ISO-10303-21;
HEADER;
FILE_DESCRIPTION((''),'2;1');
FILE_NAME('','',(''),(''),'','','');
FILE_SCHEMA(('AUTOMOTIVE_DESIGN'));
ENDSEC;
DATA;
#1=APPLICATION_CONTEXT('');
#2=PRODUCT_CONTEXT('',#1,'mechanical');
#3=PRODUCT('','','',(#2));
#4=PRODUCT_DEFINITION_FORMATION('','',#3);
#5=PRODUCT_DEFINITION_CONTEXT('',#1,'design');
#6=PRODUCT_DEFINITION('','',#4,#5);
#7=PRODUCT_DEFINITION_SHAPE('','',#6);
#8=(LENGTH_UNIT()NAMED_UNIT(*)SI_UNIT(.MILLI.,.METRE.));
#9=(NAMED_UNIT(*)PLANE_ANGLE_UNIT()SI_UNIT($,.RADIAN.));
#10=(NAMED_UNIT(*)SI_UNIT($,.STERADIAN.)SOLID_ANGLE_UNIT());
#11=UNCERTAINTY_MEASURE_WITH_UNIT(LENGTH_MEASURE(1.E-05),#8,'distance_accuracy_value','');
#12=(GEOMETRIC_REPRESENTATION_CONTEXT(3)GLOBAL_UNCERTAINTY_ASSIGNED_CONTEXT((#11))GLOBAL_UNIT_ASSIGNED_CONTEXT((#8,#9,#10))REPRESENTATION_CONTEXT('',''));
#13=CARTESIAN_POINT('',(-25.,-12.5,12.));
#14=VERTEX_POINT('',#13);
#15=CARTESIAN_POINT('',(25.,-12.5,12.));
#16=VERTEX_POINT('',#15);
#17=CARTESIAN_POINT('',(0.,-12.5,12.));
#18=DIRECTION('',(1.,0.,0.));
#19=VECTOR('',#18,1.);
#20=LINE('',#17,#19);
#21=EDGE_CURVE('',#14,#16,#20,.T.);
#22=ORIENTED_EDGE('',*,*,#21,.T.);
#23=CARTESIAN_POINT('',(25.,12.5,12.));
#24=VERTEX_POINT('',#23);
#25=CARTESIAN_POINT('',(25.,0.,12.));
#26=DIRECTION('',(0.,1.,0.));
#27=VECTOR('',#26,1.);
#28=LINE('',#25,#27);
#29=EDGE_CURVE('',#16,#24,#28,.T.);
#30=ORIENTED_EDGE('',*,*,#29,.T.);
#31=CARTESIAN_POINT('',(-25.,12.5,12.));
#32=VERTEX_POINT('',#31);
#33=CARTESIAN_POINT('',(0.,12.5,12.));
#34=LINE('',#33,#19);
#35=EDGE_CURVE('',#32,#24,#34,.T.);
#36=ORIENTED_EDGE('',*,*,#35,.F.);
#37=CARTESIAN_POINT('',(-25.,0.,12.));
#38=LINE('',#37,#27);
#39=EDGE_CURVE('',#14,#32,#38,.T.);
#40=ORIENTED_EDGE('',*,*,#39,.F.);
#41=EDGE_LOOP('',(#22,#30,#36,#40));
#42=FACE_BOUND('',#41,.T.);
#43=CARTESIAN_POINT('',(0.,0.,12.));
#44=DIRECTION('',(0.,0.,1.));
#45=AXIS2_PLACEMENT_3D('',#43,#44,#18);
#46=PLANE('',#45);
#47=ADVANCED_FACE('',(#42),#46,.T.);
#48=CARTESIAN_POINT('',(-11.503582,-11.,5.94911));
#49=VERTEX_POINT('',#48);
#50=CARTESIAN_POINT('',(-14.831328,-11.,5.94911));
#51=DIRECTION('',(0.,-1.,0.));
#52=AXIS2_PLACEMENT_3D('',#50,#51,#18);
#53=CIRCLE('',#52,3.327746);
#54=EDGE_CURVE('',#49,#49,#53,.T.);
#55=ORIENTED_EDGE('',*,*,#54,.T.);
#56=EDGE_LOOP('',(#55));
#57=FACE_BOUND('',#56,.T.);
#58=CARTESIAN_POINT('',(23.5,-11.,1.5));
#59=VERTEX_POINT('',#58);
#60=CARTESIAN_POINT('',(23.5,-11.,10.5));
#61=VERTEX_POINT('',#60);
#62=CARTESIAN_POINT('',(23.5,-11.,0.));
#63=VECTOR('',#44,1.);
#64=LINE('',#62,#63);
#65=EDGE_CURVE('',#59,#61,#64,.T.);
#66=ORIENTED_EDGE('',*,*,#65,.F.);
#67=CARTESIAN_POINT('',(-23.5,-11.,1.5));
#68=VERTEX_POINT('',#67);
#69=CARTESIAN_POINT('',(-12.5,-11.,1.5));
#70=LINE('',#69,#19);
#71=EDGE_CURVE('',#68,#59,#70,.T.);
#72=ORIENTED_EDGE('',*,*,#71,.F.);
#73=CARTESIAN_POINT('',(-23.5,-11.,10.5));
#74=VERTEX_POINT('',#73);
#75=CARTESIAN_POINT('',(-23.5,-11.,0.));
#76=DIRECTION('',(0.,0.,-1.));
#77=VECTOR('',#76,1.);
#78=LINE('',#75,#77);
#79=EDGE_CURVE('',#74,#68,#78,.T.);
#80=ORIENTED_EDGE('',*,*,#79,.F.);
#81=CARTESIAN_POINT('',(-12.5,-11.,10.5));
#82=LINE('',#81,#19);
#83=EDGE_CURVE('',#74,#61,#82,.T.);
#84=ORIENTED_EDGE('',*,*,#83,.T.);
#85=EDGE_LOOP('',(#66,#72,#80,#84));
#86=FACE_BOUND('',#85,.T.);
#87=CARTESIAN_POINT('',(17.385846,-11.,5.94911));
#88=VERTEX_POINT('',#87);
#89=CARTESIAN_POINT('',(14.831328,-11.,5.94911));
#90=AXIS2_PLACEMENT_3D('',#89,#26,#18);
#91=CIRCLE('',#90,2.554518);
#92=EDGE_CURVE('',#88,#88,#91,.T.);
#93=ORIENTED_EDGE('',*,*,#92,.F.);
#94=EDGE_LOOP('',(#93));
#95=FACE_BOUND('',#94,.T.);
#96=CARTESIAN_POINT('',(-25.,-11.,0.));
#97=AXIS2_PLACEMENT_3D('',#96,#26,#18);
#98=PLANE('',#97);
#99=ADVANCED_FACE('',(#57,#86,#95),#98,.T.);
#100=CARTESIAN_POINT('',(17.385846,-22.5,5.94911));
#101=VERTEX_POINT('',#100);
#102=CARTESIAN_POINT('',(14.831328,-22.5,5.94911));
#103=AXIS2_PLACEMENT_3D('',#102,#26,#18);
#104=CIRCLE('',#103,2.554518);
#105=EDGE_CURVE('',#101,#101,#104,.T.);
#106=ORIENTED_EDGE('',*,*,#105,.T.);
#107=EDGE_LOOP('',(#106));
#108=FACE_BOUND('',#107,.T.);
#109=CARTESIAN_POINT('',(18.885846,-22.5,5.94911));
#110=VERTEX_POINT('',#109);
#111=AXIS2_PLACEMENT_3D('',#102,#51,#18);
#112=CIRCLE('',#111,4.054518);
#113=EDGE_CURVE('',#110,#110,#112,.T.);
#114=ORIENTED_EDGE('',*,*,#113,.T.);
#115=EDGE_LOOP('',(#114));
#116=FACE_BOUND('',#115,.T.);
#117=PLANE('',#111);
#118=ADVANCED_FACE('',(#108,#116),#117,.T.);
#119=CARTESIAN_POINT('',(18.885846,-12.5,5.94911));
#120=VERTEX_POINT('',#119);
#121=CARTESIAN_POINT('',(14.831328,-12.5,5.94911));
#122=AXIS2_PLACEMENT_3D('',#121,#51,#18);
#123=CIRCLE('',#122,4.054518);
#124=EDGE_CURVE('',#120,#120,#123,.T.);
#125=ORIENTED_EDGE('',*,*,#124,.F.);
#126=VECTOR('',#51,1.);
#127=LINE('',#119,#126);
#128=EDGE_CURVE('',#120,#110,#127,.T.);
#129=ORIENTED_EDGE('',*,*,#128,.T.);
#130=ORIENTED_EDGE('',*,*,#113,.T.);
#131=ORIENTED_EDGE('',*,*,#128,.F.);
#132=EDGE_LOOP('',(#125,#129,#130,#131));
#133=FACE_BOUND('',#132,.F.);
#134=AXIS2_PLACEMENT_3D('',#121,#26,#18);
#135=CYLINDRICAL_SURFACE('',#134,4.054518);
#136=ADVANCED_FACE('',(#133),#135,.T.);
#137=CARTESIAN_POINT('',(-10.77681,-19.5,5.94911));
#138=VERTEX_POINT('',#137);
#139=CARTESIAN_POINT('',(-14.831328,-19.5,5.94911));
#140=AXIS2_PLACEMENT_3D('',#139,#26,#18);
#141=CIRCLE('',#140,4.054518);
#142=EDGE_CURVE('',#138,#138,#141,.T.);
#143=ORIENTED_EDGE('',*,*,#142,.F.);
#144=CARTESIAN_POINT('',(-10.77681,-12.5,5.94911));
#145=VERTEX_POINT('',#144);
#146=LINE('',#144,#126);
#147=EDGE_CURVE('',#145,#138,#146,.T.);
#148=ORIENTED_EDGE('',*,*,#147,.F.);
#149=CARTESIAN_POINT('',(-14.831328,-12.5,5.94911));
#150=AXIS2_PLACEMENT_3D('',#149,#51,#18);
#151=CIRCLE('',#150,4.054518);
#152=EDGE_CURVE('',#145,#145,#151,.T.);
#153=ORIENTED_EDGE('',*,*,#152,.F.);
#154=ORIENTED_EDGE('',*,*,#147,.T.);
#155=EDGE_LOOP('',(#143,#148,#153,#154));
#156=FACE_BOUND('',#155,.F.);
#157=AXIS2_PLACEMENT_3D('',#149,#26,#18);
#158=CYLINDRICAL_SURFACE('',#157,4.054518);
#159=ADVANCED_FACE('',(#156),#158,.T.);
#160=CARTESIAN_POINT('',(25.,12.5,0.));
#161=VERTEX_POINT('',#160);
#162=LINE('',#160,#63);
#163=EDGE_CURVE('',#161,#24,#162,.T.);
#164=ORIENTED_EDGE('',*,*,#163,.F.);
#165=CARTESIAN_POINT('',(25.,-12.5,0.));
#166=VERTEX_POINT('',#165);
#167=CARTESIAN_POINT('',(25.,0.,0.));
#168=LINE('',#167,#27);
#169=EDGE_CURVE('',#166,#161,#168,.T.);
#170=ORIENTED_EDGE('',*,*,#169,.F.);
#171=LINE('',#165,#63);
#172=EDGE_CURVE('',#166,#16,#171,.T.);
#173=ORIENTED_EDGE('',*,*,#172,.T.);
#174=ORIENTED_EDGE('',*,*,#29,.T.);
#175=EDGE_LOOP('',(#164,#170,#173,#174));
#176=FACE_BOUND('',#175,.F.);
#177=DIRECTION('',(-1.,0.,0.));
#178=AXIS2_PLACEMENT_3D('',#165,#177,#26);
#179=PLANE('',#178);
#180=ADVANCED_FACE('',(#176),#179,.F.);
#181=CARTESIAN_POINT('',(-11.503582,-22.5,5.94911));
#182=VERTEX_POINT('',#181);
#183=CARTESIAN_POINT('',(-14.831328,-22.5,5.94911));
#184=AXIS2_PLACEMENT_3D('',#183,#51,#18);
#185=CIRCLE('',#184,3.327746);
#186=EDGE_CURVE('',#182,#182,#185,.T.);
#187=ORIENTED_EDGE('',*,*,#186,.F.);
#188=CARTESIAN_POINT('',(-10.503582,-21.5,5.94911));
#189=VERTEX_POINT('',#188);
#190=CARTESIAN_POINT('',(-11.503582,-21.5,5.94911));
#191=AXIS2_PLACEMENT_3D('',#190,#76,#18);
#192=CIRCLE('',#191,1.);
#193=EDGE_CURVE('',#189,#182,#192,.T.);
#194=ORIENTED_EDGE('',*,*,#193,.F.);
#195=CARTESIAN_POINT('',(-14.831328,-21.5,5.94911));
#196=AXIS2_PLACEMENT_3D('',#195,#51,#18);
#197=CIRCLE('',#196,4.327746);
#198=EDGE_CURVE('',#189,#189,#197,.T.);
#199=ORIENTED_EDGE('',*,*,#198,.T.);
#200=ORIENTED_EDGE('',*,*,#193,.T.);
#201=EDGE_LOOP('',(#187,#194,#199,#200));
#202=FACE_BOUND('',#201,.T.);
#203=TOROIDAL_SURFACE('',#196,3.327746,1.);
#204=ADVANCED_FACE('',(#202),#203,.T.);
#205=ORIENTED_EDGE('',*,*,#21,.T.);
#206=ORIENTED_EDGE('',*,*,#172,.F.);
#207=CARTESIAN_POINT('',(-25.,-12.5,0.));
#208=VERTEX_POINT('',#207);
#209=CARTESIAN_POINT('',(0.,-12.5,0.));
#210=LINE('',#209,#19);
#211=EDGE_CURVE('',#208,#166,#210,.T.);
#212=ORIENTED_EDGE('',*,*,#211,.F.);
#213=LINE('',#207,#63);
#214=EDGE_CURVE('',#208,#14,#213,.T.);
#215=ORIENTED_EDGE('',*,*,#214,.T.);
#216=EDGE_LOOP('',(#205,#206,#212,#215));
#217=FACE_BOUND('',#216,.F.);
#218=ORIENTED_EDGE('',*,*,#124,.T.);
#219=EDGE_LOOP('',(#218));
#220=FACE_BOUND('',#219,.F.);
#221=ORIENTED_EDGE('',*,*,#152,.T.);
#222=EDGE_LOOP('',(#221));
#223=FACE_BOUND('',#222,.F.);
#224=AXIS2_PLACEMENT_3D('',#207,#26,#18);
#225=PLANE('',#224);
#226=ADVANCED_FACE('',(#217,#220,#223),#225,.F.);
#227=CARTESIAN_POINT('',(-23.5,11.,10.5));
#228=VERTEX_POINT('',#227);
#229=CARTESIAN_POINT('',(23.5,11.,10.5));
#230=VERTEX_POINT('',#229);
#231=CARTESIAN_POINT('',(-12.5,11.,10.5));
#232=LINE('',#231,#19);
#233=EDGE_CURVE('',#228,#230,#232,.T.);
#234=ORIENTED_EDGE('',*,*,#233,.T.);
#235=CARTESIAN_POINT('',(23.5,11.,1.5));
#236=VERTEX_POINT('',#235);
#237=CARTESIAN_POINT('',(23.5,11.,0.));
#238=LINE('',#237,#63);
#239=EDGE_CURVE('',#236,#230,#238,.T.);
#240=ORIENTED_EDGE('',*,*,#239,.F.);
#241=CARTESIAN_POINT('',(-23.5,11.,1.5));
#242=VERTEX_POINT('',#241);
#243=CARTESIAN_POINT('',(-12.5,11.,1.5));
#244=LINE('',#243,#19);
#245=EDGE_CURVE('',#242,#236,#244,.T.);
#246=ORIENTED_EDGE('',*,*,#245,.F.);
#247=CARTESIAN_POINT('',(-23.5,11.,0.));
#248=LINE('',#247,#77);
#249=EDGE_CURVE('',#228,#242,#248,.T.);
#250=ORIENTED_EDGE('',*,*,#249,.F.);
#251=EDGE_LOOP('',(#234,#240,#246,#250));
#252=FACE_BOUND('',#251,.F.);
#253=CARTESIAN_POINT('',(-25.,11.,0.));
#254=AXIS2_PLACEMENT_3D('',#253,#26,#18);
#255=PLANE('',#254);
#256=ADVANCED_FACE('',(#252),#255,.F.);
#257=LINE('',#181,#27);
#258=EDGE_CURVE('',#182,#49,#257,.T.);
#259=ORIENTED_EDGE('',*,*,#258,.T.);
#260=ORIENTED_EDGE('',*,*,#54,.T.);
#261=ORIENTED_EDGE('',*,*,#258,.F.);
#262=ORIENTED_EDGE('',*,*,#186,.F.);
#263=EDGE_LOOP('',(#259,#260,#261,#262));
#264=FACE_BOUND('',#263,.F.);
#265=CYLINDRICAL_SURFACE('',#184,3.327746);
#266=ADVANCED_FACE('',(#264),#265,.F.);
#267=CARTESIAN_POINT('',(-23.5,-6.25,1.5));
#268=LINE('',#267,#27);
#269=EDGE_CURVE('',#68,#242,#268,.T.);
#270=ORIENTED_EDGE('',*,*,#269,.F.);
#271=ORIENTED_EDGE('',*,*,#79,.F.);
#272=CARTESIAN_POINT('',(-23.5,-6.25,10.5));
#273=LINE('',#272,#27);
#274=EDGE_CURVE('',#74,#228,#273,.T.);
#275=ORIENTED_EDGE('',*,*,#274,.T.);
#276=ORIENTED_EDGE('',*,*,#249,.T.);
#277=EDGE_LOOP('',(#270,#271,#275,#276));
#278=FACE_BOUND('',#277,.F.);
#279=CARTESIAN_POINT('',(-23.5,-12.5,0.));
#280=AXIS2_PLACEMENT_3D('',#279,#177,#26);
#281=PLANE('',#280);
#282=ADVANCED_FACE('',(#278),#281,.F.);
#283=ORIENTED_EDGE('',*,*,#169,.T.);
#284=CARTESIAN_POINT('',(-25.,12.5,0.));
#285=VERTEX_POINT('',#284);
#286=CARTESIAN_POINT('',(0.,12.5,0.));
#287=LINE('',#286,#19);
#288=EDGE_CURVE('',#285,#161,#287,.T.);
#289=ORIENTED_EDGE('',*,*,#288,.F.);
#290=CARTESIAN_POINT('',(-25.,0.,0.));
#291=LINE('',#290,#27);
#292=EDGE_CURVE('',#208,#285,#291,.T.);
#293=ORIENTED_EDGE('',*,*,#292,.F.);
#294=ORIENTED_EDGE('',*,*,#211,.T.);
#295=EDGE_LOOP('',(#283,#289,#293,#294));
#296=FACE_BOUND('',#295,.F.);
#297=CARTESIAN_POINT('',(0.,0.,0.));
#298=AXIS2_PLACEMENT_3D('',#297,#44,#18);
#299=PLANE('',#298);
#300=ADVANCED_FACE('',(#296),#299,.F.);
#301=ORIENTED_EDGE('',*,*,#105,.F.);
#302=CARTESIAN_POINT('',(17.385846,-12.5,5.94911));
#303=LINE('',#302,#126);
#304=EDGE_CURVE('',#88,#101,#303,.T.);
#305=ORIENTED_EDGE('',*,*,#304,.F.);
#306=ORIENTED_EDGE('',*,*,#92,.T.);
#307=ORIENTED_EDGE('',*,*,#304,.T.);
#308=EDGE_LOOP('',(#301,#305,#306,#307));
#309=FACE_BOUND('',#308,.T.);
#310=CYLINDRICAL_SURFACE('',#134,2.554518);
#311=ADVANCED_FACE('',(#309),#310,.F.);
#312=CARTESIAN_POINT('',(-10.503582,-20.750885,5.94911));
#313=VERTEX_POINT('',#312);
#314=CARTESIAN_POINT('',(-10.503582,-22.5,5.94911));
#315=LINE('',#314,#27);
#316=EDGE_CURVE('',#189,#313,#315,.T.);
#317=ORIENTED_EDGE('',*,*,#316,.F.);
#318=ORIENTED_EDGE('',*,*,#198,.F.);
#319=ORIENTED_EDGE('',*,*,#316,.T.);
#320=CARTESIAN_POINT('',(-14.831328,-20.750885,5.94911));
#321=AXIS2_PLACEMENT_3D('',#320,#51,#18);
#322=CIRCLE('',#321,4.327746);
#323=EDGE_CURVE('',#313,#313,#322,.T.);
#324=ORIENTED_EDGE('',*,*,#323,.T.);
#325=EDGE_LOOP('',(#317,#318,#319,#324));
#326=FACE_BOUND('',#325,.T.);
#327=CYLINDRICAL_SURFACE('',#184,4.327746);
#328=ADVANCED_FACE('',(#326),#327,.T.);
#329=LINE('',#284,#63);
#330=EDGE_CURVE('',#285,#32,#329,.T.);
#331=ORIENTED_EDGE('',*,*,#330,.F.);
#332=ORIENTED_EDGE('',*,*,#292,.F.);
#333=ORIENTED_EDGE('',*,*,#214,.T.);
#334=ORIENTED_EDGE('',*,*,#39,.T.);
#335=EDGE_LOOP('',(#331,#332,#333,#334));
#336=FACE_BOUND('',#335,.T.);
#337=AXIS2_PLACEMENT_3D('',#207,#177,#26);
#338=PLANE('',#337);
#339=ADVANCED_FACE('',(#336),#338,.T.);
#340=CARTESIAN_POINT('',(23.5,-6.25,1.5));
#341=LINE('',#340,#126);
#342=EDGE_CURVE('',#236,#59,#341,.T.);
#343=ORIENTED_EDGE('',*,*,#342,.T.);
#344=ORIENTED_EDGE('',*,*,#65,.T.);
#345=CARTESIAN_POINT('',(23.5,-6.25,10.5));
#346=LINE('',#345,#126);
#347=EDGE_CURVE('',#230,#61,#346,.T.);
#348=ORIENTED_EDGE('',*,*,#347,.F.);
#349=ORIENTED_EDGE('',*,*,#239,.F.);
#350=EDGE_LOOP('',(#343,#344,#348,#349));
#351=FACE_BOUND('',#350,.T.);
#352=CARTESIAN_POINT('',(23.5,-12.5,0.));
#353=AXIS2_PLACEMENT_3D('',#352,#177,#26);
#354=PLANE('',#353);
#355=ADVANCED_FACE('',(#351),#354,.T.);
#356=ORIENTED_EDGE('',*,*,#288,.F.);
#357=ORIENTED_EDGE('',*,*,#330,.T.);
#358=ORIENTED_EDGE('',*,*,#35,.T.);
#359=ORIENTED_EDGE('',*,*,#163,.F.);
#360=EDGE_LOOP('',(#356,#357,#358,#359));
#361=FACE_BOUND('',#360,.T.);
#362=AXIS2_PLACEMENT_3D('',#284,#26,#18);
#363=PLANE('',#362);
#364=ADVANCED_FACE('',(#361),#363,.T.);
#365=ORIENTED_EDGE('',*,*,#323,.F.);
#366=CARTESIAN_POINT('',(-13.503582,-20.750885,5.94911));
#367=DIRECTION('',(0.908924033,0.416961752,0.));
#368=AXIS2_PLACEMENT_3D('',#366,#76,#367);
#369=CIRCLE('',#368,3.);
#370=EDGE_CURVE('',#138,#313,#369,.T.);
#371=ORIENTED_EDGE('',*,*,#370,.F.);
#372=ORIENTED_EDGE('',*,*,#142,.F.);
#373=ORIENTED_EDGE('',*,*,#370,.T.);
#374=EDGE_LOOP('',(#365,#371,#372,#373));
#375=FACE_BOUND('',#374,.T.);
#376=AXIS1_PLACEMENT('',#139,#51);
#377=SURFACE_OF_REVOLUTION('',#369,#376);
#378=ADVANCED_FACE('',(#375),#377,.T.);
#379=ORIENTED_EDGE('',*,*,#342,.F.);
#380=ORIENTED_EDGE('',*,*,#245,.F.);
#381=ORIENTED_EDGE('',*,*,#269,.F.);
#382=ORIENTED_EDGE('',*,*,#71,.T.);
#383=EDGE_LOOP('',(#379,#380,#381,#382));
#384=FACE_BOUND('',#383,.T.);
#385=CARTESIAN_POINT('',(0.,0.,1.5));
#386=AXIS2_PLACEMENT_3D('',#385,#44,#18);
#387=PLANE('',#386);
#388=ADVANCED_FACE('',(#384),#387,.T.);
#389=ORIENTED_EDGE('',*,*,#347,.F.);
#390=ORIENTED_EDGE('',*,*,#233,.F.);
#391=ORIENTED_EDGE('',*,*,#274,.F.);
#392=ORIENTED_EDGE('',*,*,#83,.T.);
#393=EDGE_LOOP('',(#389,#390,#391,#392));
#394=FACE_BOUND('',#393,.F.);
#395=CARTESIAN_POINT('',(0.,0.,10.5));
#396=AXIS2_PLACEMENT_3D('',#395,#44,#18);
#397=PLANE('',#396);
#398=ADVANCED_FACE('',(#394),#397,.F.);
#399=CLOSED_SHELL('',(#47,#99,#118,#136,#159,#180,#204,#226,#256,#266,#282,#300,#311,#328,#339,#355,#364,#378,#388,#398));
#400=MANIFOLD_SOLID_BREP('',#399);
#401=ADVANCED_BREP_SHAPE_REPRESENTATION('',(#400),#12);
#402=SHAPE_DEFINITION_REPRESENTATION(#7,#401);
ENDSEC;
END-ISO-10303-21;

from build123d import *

# Parameters (mm, degrees)
F0_W     = 50
F0_H     = 25
F1_DEPTH = 12
F2_R     = 4.0545181675
F3_DEPTH = 10
F4_T     = -1.5
F5_R     = 4.327746069
F6_DEPTH = 3
F8_R     = 1
F9_DEPTH = 20


# Not quite as in the source:
# - a fillet or chamfer that OpenCascade refuses, or shapes differently, is made with other operations: its cross-section is extruded or revolved along the edge and cut away or added


with BuildPart() as f1:
    # F0 (on Top) → F1 (new body)
    with BuildSketch(Plane.XY):
        Rectangle(F0_W, F0_H)
    extrude(amount=F1_DEPTH)

    # F2 (on face) → F3 (join)
    with BuildSketch(Plane.XZ.offset(12.5)):
        with Locations((-14.8313278332, 5.9491097927)):
            Circle(F2_R)
        with Locations((14.8313278332, 5.9491097927)):
            Circle(F2_R)
    extrude(amount=F3_DEPTH)

    # F4
    f4_openings = [f1.faces().sort_by_distance(p)[0] for p in [
        (14.831328, -22.5, 5.94911),
        (-14.831328, -22.5, 5.94911),
    ]]
    offset(amount=F4_T, openings=f4_openings, kind=Kind.INTERSECTION)

    # F5 (on face) → F6 (join)
    with BuildSketch(Plane.XZ.offset(22.5)):
        with Locations((-14.8313278332, 5.9491097927)):
            Circle(F5_R)
    extrude(amount=-F6_DEPTH)

    # F7: fillet of radius 3 on 1 edges, made by hand

    # F7_s1 → F7_t2 (revolve, cut)
    with BuildSketch(Plane.XY.offset(5.9491097927)):
        with BuildLine():
            ThreePointArc((-10.7768096658, -19.5), (-10.5726846068, -20.1106963365), (-10.5035817643, -20.7508852557))
            Line((-10.5035817643, -20.7508852557), (-10.5035817643, -19.5))
            Line((-10.5035817643, -19.5), (-10.7768096658, -19.5))
        make_face()
    revolve(axis=Axis((-14.8313278332, -19.5, 5.9491097927), (0, -1, 0)), mode=Mode.SUBTRACT)

    # F8
    f8_edges = [f1.edges().sort_by_distance(p)[0] for p in [
        (-19.159074, -22.5, 5.94911),
    ]]
    fillet(f8_edges, radius=F8_R)

    # F9 (cut): a face of the model
    f9_faces = [f1.faces().sort_by_distance(p)[0] for p in [
        (-14.8313278332, -22.5, 5.9491097927),
    ]]
    extrude(f9_faces, amount=-F9_DEPTH, mode=Mode.SUBTRACT)


solid = f1.part
